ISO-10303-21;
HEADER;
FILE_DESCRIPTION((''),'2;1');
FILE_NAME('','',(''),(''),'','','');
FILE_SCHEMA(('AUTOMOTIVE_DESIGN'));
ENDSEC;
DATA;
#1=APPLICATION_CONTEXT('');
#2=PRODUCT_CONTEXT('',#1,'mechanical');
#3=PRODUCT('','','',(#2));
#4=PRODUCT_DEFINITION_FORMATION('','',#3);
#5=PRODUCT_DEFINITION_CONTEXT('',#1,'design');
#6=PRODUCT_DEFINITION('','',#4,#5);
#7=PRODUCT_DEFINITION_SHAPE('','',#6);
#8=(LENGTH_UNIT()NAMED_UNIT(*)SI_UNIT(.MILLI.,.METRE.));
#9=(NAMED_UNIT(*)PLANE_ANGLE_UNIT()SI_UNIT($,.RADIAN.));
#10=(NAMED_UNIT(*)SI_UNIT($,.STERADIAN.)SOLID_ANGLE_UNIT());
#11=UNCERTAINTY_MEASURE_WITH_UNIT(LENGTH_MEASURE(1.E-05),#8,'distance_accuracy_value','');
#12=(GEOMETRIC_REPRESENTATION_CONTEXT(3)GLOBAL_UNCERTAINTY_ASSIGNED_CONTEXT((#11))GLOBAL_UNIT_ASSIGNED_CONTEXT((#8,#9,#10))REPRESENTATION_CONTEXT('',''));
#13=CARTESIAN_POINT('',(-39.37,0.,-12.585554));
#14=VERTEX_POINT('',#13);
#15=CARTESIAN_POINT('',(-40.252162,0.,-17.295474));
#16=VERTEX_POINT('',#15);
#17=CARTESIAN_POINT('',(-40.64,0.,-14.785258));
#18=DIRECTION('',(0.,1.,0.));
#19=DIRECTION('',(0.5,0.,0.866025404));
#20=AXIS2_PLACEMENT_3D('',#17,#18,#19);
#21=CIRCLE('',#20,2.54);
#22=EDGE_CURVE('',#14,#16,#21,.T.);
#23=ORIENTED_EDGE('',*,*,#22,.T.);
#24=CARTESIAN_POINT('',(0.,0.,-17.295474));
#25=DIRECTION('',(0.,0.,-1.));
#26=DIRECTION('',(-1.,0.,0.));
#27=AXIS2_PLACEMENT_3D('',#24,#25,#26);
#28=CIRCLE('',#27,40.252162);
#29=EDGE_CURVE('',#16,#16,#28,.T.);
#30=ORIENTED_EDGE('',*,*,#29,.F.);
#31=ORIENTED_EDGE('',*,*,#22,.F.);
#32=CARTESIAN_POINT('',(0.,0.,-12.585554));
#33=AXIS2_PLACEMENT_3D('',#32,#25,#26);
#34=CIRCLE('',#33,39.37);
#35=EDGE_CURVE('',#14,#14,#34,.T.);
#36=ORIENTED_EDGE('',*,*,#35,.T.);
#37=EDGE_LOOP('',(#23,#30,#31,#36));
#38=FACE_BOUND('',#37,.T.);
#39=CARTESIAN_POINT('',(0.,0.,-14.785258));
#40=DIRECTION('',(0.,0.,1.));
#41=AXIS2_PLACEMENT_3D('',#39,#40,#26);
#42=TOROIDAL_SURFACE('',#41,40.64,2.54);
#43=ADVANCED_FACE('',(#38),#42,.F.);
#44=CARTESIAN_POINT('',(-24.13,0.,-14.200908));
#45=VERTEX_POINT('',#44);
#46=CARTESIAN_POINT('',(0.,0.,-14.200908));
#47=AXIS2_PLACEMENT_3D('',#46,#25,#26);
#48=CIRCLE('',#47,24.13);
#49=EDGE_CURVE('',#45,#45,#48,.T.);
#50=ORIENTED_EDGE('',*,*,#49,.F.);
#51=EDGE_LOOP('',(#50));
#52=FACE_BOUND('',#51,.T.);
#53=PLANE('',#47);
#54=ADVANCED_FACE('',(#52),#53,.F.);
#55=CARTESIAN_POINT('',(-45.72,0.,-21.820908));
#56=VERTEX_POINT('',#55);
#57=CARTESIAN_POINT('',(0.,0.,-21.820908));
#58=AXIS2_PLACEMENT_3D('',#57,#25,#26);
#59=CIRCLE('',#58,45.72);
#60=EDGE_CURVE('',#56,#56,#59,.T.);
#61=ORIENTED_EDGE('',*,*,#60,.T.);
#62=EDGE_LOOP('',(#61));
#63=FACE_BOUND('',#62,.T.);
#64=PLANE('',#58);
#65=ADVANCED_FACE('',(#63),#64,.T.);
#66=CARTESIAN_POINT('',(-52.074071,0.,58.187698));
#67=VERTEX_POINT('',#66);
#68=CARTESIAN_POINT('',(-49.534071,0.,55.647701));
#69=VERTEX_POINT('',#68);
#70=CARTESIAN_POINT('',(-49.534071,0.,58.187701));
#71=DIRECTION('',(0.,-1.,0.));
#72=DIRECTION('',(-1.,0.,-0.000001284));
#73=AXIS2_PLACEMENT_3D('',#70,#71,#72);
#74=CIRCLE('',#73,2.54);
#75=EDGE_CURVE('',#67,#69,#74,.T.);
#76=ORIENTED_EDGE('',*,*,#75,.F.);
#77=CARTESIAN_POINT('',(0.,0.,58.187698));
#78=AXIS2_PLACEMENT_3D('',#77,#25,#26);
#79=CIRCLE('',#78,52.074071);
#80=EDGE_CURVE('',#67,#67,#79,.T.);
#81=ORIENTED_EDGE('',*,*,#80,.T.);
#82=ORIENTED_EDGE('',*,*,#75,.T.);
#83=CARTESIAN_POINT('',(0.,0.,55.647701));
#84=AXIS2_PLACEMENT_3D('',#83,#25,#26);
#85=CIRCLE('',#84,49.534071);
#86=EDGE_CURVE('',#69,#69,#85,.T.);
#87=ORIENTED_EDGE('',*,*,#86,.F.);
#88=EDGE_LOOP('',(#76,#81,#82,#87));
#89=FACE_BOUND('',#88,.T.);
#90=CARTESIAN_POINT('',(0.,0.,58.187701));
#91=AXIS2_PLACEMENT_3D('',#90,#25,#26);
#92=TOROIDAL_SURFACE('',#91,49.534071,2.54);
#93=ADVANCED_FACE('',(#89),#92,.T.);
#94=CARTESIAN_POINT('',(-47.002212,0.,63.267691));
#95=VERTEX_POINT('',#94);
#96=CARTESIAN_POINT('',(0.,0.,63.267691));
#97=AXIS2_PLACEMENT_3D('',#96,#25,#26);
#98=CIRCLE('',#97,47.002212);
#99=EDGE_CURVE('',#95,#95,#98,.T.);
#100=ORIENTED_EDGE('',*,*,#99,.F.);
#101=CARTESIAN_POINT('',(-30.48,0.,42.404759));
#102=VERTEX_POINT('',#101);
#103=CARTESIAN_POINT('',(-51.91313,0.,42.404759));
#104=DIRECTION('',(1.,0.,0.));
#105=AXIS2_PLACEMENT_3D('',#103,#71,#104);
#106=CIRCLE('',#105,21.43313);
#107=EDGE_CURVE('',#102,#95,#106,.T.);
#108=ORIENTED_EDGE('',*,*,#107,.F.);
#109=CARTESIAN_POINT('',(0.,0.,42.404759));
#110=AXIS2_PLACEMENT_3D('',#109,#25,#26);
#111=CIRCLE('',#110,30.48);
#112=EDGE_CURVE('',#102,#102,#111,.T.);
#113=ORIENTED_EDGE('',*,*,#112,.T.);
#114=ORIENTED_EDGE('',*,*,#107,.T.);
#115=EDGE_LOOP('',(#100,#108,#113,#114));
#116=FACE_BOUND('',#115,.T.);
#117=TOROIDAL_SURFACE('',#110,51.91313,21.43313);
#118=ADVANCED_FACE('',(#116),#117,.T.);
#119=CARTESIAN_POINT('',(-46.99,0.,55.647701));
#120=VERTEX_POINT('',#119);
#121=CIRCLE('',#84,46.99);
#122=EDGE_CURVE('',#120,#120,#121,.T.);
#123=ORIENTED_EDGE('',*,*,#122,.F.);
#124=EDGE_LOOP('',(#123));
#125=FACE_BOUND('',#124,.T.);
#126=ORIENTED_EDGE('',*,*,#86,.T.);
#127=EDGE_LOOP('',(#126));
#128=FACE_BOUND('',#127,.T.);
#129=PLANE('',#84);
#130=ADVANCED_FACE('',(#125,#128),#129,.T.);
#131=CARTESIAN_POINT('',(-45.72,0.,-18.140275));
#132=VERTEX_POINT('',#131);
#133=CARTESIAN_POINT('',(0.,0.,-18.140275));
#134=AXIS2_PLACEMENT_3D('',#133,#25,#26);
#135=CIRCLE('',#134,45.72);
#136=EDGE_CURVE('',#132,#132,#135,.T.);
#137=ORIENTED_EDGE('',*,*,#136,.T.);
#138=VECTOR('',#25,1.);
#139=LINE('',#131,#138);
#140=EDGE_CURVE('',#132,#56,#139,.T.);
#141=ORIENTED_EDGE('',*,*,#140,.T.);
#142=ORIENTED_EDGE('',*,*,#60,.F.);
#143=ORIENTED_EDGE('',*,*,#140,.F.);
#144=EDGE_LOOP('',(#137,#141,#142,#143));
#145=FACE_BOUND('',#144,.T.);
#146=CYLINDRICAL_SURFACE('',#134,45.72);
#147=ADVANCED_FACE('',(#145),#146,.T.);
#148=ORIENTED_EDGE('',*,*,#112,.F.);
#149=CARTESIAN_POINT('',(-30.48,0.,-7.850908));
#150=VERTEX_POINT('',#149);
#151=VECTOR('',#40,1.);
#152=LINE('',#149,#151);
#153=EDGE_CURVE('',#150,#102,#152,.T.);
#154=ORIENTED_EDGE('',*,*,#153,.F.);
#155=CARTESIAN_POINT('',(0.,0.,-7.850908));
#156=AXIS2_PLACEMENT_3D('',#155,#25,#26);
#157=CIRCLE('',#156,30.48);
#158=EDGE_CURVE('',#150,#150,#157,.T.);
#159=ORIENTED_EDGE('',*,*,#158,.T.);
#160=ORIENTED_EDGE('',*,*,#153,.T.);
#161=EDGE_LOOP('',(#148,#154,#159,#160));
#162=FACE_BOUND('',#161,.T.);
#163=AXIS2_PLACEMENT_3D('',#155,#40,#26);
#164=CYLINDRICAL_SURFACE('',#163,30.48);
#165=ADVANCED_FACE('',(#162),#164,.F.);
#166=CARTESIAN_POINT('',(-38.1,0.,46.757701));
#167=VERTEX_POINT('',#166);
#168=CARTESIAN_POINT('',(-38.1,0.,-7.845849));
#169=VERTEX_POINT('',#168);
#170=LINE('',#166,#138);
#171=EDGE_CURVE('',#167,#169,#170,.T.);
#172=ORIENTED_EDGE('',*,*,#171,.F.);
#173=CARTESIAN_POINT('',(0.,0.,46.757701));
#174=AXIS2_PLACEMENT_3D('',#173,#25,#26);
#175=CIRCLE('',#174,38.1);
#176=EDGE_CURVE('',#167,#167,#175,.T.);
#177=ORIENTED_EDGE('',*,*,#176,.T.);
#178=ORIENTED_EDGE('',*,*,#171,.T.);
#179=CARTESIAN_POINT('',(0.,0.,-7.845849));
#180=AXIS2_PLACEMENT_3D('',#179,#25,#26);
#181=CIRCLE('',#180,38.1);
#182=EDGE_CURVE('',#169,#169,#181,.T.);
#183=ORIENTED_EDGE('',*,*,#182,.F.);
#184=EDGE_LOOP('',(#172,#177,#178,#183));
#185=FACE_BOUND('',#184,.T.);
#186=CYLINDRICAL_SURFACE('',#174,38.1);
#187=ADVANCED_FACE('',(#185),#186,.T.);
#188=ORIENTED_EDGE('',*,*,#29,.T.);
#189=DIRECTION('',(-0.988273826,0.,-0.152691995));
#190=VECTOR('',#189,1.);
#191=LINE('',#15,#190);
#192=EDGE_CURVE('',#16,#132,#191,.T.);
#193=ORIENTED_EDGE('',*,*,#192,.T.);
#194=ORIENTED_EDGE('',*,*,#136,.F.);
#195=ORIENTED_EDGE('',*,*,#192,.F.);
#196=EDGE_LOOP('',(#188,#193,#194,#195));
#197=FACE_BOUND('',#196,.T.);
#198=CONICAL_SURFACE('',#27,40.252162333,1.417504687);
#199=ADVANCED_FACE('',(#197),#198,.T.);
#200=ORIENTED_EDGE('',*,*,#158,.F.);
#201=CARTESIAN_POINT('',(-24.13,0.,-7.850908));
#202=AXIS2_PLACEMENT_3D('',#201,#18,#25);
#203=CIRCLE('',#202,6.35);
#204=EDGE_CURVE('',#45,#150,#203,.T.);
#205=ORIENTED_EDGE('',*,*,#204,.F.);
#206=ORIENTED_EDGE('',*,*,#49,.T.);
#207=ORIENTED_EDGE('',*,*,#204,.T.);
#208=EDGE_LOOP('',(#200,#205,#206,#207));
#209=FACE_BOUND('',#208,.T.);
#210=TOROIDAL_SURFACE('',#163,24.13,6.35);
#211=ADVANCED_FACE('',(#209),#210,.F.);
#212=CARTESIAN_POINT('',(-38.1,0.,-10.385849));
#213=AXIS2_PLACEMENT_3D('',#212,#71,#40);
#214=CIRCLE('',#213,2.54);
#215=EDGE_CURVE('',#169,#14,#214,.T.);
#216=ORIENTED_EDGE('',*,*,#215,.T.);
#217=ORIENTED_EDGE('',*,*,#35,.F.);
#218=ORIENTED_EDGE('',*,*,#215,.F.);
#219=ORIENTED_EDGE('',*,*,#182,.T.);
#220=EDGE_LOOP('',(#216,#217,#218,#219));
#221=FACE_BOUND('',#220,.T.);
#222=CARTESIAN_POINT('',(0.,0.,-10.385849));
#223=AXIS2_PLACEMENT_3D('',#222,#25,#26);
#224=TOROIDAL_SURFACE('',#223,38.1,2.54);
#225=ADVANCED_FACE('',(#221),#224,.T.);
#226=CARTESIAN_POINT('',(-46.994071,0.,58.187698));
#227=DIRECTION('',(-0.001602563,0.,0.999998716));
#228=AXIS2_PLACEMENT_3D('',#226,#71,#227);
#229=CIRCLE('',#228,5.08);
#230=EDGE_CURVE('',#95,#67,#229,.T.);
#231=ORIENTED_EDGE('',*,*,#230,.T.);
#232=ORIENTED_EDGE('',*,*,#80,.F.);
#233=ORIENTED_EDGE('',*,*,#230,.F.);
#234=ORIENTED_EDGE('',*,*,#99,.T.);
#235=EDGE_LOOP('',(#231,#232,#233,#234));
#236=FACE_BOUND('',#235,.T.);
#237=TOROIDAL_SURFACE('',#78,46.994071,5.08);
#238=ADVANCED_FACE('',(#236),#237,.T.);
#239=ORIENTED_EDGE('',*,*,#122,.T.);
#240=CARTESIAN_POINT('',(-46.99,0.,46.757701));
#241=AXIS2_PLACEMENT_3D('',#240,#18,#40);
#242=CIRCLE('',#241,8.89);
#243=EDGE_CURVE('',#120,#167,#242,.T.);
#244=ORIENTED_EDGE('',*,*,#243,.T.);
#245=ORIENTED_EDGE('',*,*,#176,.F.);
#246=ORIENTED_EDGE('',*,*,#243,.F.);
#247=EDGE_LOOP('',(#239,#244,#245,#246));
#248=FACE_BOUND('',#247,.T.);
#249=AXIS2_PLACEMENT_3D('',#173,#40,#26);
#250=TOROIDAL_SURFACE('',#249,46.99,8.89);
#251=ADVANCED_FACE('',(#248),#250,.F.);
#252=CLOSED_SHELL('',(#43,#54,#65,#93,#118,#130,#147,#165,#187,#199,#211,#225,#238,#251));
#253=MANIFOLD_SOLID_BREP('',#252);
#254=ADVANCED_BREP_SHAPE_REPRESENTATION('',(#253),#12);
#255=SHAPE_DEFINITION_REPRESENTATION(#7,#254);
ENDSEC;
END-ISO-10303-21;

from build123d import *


# Not quite as in the source:
# - ends of sketch curves that miss each other by under 0.0002 mm in the source are joined


with BuildPart() as f2:
    # F0 (on Front) → F2 (revolve)
    with BuildSketch(Plane.XZ):
        with BuildLine():
            Line((-45.72, -21.8209084123), (-38.1, -21.8209084123))
            Line((-38.1, -21.8209084123), (-30.48, -21.8209084123))
            Line((-30.48, -21.8209084123), (0, -21.8209084123))
            Line((0, -21.8209084123), (0, -14.2009084123))
            Line((0, -14.2009084123), (-24.13, -14.2009084123))
            ThreePointArc((-24.13, -14.2009084123), (-28.6201280605, -12.3410364729), (-30.48, -7.8509084123))
            Line((-30.48, -7.8509084123), (-30.48, 42.4047588836))
            ThreePointArc((-30.48, 42.4047588836), (-35.1108174237, 55.7111992459), (-47.0022115332, 63.2676912401))
            ThreePointArc((-47.0022115332, 63.2676912401), (-50.5890500932, 61.7769207718), (-52.0740705111, 58.1876977634))
            ThreePointArc((-52.0740705111, 58.1876977634), (-51.3301217353, 56.3916498008), (-49.5340705111, 55.647701025))
            Line((-49.5340705111, 55.647701025), (-46.99, 55.647701025))
            ThreePointArc((-46.99, 55.647701025), (-40.7038207153, 53.0438803098), (-38.1, 46.757701025))
            Line((-38.1, 46.757701025), (-38.1, -7.8458491338))
            ThreePointArc((-38.1, -7.8458491338), (-40.5534515988, -9.7284487592), (-39.37, -12.5855536594))
            ThreePointArc((-39.37, -12.5855536594), (-38.1434137036, -15.2528657816), (-40.2521623329, -17.2954737024))
            Line((-40.2521623329, -17.2954737024), (-45.72, -18.1402750313))
            Line((-45.72, -18.1402750313), (-45.72, -21.8209084123))
        make_face()
    revolve(axis=Axis((0, 0, 8.5881464183), (0, 0, -1)))


solid = f2.part
